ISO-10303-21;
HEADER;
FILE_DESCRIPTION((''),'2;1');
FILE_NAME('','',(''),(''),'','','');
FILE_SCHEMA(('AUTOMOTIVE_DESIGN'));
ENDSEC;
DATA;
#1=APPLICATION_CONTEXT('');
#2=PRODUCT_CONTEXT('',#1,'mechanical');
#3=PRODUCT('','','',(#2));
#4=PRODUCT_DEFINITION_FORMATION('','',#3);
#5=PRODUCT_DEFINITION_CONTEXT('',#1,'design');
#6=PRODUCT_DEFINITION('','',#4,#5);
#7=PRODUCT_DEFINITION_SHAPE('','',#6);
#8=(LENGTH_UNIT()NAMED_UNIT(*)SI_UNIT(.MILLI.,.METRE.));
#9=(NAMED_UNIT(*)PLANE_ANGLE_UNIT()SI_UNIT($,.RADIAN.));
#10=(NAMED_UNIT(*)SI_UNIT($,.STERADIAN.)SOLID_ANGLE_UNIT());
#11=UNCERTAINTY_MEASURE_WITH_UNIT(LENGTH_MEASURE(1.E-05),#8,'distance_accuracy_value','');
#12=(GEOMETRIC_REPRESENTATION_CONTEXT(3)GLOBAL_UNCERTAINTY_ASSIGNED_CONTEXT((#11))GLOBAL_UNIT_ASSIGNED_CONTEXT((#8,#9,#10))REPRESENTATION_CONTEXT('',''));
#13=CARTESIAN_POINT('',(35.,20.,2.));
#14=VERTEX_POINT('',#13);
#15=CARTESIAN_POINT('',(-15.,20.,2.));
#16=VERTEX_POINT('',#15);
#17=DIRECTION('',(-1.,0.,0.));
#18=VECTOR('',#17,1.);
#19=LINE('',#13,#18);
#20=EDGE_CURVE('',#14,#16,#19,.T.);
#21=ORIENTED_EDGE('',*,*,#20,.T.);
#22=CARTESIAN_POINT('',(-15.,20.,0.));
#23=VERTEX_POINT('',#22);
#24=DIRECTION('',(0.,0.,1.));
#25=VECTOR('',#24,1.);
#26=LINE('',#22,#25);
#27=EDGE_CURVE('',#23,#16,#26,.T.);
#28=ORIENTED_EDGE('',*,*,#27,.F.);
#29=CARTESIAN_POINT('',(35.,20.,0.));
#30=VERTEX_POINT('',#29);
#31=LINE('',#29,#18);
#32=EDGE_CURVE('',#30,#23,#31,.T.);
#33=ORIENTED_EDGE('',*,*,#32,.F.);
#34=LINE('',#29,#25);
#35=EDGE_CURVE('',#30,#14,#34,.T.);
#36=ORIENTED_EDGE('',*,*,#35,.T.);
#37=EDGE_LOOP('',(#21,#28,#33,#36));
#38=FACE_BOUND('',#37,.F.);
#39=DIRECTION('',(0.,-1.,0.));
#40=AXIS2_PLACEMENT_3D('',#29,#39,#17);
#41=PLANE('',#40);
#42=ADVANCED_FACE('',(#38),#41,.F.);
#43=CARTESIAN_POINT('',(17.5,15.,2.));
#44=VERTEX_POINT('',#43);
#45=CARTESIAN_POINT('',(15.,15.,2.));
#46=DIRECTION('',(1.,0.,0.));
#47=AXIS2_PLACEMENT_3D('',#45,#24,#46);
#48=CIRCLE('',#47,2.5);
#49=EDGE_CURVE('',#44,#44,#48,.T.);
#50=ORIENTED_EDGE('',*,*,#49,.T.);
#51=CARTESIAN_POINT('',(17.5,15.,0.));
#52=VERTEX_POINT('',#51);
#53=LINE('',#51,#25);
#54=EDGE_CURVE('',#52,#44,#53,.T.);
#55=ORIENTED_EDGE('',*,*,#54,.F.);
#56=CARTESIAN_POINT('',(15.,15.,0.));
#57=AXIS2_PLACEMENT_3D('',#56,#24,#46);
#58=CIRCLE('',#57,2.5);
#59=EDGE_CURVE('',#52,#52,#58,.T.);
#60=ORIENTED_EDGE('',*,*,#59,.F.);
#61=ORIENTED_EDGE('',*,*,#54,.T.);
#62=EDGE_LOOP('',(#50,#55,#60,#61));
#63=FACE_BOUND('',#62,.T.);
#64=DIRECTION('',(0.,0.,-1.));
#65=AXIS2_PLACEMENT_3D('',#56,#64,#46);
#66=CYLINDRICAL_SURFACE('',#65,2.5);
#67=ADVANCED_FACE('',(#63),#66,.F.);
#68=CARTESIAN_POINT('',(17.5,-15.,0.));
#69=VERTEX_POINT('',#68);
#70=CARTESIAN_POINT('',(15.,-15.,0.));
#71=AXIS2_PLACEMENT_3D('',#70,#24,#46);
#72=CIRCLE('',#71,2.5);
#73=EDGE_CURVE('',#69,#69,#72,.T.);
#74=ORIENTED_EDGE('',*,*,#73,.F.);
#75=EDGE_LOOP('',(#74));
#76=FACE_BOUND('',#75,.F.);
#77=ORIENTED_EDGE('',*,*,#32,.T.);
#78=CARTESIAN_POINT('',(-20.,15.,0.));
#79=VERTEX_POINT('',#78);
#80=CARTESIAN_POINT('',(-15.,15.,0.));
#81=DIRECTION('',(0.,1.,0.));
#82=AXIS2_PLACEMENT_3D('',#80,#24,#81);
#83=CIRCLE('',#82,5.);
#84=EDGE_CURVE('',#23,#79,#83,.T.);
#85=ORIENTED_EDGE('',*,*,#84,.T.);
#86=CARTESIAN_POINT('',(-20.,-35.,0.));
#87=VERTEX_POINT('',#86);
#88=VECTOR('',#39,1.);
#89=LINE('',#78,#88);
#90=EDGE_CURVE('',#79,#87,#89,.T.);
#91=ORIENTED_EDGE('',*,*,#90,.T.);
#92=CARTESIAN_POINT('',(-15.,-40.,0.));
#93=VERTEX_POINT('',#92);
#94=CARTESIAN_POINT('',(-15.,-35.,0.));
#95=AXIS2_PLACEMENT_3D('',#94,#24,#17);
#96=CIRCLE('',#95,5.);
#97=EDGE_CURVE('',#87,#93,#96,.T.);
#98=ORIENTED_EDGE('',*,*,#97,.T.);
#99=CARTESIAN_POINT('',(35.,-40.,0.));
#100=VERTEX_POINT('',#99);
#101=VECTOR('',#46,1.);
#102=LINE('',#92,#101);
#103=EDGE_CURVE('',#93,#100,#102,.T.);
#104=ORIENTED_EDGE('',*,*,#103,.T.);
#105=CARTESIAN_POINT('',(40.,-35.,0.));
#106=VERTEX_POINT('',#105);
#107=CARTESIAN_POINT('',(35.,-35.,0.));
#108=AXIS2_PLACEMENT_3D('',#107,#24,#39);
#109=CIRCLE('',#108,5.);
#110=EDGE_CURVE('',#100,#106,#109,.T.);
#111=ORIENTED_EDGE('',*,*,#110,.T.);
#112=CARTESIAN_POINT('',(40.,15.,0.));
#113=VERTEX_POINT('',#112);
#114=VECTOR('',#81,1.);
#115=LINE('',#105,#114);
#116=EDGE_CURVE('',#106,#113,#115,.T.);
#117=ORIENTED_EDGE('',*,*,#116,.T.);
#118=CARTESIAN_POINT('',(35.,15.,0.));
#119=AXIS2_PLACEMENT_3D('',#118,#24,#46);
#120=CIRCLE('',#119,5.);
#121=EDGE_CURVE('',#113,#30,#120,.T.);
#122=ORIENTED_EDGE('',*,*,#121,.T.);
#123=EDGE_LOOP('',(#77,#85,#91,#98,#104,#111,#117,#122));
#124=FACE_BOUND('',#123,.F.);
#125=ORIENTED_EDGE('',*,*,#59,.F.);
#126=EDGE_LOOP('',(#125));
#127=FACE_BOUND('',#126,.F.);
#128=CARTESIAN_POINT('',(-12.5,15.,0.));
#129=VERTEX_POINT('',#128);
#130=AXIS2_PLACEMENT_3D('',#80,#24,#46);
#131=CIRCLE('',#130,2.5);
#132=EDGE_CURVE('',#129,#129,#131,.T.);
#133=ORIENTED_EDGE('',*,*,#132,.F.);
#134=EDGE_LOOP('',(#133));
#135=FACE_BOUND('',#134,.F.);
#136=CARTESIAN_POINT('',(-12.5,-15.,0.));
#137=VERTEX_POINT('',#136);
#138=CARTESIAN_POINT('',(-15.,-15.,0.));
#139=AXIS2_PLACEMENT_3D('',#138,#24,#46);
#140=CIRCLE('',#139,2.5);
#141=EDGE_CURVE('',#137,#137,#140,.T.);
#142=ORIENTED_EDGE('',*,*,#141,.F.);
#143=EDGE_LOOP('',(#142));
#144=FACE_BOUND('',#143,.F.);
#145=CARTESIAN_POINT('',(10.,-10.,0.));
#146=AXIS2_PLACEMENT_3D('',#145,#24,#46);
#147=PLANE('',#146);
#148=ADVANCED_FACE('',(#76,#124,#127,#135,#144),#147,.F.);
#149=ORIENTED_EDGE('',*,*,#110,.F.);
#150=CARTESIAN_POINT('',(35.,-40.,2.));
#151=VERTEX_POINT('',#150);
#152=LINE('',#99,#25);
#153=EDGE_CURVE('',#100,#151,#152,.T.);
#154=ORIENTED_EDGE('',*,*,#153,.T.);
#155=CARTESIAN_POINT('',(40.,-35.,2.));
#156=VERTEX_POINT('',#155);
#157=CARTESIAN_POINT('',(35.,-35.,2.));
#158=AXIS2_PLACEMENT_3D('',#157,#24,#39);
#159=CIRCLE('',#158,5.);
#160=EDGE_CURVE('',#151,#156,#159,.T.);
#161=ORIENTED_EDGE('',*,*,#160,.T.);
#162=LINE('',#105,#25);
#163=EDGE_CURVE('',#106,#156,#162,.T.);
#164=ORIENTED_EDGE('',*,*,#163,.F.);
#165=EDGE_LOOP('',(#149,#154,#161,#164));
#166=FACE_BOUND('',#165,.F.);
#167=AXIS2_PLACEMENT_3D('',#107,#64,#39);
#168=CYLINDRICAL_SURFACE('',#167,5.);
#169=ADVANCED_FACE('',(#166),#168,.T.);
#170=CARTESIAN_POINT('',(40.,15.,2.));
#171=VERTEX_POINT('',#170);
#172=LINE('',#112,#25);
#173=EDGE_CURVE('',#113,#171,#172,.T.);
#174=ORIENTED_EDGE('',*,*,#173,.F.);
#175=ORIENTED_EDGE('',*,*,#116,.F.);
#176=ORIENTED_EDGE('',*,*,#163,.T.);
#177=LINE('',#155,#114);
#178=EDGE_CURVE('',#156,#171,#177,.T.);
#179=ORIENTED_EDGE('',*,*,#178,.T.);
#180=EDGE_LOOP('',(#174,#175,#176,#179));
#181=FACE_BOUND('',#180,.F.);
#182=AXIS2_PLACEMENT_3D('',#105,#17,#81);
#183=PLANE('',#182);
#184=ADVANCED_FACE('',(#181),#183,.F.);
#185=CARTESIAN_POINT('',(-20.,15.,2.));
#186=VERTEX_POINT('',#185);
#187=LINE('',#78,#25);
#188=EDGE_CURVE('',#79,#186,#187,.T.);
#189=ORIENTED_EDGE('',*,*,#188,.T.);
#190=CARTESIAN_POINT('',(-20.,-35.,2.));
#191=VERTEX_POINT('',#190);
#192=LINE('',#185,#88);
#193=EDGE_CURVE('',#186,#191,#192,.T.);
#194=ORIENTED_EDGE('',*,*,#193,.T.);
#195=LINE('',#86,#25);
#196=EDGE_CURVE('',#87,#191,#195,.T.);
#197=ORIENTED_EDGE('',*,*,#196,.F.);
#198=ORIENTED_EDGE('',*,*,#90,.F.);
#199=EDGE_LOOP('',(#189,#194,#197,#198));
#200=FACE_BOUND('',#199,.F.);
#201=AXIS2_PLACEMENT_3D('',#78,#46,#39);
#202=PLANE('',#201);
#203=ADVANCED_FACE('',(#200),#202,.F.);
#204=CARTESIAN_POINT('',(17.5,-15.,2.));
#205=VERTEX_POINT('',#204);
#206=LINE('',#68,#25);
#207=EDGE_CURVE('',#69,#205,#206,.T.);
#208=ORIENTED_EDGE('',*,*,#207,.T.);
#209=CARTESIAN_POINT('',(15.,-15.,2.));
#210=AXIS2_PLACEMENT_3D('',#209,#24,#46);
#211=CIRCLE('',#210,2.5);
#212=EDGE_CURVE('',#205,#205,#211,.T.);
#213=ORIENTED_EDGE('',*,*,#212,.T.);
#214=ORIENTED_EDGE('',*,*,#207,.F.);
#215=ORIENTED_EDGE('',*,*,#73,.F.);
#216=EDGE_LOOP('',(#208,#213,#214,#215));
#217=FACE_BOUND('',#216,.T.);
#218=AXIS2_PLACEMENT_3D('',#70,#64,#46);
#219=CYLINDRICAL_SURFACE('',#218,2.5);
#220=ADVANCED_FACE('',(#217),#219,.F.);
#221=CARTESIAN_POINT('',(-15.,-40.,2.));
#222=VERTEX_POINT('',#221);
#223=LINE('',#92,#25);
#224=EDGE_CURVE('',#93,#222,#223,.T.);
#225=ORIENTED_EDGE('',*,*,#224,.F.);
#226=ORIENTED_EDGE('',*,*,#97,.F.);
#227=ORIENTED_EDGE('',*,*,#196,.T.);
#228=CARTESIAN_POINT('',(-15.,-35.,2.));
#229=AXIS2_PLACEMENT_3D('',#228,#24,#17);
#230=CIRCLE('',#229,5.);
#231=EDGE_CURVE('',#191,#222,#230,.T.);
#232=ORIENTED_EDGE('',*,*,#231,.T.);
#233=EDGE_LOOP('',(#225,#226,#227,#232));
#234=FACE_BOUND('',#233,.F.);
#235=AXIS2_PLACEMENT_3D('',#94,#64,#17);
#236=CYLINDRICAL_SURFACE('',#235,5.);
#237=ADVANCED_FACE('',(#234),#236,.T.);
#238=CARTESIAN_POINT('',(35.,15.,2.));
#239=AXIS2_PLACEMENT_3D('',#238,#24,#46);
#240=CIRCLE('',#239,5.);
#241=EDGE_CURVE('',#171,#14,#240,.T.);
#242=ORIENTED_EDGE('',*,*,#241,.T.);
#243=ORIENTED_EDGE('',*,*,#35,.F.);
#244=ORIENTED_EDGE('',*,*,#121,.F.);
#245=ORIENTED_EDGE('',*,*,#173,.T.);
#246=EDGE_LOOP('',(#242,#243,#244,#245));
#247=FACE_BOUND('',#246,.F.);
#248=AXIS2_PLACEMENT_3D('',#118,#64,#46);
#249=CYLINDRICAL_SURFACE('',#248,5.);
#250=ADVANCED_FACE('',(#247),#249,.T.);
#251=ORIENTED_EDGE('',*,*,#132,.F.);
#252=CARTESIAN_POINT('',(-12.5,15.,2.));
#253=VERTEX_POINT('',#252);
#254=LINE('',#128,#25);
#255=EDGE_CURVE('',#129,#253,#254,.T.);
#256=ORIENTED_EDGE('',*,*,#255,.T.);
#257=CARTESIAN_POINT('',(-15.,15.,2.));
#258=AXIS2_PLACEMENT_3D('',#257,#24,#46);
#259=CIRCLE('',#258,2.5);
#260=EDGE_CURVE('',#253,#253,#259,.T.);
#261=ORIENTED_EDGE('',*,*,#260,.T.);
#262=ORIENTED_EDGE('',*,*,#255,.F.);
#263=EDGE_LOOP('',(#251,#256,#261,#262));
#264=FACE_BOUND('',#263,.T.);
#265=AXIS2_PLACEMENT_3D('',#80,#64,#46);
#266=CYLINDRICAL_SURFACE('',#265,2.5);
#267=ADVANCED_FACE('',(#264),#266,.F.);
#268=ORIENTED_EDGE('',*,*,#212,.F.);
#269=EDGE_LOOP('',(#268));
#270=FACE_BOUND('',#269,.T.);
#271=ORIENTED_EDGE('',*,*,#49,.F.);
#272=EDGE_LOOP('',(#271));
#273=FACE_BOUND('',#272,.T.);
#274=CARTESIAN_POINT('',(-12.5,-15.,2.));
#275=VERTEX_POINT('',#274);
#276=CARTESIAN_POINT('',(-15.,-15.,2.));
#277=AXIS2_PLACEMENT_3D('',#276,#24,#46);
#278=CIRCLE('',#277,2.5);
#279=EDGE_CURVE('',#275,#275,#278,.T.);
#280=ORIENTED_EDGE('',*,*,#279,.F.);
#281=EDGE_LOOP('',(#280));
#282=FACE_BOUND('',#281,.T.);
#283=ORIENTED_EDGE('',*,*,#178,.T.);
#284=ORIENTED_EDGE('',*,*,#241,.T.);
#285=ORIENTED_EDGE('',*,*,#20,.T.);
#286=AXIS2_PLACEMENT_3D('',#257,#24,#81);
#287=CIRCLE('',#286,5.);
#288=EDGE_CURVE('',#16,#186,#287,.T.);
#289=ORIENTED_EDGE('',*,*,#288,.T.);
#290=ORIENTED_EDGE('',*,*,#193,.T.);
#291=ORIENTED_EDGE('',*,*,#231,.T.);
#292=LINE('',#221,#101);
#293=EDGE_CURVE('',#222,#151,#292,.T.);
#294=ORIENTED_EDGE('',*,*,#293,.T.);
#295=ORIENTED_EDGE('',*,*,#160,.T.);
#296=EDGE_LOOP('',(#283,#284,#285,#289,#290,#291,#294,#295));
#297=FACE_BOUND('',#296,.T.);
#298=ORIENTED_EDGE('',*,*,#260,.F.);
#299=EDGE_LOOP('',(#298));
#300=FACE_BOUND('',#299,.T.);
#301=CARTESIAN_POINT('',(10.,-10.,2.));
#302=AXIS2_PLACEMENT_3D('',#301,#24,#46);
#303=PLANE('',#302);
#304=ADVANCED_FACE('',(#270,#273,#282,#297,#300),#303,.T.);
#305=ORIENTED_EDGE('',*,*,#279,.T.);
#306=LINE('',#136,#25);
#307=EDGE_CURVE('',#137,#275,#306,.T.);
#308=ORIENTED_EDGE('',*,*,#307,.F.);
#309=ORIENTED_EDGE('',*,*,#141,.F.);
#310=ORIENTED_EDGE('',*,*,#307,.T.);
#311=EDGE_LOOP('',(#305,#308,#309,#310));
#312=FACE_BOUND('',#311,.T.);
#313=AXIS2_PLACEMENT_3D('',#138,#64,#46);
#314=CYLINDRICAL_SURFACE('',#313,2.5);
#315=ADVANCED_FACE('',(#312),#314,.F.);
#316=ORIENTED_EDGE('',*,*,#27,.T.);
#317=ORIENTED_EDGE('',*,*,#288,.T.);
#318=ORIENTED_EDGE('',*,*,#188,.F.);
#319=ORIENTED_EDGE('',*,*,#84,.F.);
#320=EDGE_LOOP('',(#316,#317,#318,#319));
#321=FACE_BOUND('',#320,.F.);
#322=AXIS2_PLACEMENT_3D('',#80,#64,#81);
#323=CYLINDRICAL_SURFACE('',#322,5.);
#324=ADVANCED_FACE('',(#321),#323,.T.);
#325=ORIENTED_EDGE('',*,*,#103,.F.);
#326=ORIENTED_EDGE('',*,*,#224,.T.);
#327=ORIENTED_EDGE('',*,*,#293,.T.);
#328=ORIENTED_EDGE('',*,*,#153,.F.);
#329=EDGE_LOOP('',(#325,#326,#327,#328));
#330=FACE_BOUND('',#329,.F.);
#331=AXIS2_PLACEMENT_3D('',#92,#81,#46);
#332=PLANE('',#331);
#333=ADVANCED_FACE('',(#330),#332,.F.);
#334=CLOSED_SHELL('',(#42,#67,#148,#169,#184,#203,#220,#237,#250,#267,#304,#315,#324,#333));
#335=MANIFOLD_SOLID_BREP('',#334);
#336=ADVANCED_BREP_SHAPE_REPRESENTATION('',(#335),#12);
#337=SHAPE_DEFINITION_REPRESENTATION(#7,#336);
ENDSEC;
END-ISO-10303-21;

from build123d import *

# Parameters (mm, degrees)
F0_R     = 2.5
F1_DEPTH = 2


# Not quite as in the source:
# - a feature names something its author has since deleted; it is built from what else it names


with BuildPart() as f1:
    # F0 (on Top) → F1 (new body)
    with BuildSketch(Plane.XY):
        with BuildLine():
            ThreePointArc((40, 15), (38.5355339059, 18.5355339059), (35, 20))
            Line((35, 20), (-15, 20))
            ThreePointArc((-15, 20), (-18.5355339059, 18.5355339059), (-20, 15))
            Line((-20, 15), (-20, -35))
            ThreePointArc((-20, -35), (-18.5355339059, -38.5355339059), (-15, -40))
            Line((-15, -40), (35, -40))
            ThreePointArc((35, -40), (38.5355339059, -38.5355339059), (40, -35))
            Line((40, -35), (40, 15))
        make_face()
        with Locations((-15, -15)):
            Circle(F0_R, mode=Mode.SUBTRACT)
        with Locations((15, -15)):
            Circle(F0_R, mode=Mode.SUBTRACT)
        with Locations((-15, 15)):
            Circle(F0_R, mode=Mode.SUBTRACT)
        with Locations((15, 15)):
            Circle(F0_R, mode=Mode.SUBTRACT)
    extrude(amount=F1_DEPTH)


solid = f1.part
